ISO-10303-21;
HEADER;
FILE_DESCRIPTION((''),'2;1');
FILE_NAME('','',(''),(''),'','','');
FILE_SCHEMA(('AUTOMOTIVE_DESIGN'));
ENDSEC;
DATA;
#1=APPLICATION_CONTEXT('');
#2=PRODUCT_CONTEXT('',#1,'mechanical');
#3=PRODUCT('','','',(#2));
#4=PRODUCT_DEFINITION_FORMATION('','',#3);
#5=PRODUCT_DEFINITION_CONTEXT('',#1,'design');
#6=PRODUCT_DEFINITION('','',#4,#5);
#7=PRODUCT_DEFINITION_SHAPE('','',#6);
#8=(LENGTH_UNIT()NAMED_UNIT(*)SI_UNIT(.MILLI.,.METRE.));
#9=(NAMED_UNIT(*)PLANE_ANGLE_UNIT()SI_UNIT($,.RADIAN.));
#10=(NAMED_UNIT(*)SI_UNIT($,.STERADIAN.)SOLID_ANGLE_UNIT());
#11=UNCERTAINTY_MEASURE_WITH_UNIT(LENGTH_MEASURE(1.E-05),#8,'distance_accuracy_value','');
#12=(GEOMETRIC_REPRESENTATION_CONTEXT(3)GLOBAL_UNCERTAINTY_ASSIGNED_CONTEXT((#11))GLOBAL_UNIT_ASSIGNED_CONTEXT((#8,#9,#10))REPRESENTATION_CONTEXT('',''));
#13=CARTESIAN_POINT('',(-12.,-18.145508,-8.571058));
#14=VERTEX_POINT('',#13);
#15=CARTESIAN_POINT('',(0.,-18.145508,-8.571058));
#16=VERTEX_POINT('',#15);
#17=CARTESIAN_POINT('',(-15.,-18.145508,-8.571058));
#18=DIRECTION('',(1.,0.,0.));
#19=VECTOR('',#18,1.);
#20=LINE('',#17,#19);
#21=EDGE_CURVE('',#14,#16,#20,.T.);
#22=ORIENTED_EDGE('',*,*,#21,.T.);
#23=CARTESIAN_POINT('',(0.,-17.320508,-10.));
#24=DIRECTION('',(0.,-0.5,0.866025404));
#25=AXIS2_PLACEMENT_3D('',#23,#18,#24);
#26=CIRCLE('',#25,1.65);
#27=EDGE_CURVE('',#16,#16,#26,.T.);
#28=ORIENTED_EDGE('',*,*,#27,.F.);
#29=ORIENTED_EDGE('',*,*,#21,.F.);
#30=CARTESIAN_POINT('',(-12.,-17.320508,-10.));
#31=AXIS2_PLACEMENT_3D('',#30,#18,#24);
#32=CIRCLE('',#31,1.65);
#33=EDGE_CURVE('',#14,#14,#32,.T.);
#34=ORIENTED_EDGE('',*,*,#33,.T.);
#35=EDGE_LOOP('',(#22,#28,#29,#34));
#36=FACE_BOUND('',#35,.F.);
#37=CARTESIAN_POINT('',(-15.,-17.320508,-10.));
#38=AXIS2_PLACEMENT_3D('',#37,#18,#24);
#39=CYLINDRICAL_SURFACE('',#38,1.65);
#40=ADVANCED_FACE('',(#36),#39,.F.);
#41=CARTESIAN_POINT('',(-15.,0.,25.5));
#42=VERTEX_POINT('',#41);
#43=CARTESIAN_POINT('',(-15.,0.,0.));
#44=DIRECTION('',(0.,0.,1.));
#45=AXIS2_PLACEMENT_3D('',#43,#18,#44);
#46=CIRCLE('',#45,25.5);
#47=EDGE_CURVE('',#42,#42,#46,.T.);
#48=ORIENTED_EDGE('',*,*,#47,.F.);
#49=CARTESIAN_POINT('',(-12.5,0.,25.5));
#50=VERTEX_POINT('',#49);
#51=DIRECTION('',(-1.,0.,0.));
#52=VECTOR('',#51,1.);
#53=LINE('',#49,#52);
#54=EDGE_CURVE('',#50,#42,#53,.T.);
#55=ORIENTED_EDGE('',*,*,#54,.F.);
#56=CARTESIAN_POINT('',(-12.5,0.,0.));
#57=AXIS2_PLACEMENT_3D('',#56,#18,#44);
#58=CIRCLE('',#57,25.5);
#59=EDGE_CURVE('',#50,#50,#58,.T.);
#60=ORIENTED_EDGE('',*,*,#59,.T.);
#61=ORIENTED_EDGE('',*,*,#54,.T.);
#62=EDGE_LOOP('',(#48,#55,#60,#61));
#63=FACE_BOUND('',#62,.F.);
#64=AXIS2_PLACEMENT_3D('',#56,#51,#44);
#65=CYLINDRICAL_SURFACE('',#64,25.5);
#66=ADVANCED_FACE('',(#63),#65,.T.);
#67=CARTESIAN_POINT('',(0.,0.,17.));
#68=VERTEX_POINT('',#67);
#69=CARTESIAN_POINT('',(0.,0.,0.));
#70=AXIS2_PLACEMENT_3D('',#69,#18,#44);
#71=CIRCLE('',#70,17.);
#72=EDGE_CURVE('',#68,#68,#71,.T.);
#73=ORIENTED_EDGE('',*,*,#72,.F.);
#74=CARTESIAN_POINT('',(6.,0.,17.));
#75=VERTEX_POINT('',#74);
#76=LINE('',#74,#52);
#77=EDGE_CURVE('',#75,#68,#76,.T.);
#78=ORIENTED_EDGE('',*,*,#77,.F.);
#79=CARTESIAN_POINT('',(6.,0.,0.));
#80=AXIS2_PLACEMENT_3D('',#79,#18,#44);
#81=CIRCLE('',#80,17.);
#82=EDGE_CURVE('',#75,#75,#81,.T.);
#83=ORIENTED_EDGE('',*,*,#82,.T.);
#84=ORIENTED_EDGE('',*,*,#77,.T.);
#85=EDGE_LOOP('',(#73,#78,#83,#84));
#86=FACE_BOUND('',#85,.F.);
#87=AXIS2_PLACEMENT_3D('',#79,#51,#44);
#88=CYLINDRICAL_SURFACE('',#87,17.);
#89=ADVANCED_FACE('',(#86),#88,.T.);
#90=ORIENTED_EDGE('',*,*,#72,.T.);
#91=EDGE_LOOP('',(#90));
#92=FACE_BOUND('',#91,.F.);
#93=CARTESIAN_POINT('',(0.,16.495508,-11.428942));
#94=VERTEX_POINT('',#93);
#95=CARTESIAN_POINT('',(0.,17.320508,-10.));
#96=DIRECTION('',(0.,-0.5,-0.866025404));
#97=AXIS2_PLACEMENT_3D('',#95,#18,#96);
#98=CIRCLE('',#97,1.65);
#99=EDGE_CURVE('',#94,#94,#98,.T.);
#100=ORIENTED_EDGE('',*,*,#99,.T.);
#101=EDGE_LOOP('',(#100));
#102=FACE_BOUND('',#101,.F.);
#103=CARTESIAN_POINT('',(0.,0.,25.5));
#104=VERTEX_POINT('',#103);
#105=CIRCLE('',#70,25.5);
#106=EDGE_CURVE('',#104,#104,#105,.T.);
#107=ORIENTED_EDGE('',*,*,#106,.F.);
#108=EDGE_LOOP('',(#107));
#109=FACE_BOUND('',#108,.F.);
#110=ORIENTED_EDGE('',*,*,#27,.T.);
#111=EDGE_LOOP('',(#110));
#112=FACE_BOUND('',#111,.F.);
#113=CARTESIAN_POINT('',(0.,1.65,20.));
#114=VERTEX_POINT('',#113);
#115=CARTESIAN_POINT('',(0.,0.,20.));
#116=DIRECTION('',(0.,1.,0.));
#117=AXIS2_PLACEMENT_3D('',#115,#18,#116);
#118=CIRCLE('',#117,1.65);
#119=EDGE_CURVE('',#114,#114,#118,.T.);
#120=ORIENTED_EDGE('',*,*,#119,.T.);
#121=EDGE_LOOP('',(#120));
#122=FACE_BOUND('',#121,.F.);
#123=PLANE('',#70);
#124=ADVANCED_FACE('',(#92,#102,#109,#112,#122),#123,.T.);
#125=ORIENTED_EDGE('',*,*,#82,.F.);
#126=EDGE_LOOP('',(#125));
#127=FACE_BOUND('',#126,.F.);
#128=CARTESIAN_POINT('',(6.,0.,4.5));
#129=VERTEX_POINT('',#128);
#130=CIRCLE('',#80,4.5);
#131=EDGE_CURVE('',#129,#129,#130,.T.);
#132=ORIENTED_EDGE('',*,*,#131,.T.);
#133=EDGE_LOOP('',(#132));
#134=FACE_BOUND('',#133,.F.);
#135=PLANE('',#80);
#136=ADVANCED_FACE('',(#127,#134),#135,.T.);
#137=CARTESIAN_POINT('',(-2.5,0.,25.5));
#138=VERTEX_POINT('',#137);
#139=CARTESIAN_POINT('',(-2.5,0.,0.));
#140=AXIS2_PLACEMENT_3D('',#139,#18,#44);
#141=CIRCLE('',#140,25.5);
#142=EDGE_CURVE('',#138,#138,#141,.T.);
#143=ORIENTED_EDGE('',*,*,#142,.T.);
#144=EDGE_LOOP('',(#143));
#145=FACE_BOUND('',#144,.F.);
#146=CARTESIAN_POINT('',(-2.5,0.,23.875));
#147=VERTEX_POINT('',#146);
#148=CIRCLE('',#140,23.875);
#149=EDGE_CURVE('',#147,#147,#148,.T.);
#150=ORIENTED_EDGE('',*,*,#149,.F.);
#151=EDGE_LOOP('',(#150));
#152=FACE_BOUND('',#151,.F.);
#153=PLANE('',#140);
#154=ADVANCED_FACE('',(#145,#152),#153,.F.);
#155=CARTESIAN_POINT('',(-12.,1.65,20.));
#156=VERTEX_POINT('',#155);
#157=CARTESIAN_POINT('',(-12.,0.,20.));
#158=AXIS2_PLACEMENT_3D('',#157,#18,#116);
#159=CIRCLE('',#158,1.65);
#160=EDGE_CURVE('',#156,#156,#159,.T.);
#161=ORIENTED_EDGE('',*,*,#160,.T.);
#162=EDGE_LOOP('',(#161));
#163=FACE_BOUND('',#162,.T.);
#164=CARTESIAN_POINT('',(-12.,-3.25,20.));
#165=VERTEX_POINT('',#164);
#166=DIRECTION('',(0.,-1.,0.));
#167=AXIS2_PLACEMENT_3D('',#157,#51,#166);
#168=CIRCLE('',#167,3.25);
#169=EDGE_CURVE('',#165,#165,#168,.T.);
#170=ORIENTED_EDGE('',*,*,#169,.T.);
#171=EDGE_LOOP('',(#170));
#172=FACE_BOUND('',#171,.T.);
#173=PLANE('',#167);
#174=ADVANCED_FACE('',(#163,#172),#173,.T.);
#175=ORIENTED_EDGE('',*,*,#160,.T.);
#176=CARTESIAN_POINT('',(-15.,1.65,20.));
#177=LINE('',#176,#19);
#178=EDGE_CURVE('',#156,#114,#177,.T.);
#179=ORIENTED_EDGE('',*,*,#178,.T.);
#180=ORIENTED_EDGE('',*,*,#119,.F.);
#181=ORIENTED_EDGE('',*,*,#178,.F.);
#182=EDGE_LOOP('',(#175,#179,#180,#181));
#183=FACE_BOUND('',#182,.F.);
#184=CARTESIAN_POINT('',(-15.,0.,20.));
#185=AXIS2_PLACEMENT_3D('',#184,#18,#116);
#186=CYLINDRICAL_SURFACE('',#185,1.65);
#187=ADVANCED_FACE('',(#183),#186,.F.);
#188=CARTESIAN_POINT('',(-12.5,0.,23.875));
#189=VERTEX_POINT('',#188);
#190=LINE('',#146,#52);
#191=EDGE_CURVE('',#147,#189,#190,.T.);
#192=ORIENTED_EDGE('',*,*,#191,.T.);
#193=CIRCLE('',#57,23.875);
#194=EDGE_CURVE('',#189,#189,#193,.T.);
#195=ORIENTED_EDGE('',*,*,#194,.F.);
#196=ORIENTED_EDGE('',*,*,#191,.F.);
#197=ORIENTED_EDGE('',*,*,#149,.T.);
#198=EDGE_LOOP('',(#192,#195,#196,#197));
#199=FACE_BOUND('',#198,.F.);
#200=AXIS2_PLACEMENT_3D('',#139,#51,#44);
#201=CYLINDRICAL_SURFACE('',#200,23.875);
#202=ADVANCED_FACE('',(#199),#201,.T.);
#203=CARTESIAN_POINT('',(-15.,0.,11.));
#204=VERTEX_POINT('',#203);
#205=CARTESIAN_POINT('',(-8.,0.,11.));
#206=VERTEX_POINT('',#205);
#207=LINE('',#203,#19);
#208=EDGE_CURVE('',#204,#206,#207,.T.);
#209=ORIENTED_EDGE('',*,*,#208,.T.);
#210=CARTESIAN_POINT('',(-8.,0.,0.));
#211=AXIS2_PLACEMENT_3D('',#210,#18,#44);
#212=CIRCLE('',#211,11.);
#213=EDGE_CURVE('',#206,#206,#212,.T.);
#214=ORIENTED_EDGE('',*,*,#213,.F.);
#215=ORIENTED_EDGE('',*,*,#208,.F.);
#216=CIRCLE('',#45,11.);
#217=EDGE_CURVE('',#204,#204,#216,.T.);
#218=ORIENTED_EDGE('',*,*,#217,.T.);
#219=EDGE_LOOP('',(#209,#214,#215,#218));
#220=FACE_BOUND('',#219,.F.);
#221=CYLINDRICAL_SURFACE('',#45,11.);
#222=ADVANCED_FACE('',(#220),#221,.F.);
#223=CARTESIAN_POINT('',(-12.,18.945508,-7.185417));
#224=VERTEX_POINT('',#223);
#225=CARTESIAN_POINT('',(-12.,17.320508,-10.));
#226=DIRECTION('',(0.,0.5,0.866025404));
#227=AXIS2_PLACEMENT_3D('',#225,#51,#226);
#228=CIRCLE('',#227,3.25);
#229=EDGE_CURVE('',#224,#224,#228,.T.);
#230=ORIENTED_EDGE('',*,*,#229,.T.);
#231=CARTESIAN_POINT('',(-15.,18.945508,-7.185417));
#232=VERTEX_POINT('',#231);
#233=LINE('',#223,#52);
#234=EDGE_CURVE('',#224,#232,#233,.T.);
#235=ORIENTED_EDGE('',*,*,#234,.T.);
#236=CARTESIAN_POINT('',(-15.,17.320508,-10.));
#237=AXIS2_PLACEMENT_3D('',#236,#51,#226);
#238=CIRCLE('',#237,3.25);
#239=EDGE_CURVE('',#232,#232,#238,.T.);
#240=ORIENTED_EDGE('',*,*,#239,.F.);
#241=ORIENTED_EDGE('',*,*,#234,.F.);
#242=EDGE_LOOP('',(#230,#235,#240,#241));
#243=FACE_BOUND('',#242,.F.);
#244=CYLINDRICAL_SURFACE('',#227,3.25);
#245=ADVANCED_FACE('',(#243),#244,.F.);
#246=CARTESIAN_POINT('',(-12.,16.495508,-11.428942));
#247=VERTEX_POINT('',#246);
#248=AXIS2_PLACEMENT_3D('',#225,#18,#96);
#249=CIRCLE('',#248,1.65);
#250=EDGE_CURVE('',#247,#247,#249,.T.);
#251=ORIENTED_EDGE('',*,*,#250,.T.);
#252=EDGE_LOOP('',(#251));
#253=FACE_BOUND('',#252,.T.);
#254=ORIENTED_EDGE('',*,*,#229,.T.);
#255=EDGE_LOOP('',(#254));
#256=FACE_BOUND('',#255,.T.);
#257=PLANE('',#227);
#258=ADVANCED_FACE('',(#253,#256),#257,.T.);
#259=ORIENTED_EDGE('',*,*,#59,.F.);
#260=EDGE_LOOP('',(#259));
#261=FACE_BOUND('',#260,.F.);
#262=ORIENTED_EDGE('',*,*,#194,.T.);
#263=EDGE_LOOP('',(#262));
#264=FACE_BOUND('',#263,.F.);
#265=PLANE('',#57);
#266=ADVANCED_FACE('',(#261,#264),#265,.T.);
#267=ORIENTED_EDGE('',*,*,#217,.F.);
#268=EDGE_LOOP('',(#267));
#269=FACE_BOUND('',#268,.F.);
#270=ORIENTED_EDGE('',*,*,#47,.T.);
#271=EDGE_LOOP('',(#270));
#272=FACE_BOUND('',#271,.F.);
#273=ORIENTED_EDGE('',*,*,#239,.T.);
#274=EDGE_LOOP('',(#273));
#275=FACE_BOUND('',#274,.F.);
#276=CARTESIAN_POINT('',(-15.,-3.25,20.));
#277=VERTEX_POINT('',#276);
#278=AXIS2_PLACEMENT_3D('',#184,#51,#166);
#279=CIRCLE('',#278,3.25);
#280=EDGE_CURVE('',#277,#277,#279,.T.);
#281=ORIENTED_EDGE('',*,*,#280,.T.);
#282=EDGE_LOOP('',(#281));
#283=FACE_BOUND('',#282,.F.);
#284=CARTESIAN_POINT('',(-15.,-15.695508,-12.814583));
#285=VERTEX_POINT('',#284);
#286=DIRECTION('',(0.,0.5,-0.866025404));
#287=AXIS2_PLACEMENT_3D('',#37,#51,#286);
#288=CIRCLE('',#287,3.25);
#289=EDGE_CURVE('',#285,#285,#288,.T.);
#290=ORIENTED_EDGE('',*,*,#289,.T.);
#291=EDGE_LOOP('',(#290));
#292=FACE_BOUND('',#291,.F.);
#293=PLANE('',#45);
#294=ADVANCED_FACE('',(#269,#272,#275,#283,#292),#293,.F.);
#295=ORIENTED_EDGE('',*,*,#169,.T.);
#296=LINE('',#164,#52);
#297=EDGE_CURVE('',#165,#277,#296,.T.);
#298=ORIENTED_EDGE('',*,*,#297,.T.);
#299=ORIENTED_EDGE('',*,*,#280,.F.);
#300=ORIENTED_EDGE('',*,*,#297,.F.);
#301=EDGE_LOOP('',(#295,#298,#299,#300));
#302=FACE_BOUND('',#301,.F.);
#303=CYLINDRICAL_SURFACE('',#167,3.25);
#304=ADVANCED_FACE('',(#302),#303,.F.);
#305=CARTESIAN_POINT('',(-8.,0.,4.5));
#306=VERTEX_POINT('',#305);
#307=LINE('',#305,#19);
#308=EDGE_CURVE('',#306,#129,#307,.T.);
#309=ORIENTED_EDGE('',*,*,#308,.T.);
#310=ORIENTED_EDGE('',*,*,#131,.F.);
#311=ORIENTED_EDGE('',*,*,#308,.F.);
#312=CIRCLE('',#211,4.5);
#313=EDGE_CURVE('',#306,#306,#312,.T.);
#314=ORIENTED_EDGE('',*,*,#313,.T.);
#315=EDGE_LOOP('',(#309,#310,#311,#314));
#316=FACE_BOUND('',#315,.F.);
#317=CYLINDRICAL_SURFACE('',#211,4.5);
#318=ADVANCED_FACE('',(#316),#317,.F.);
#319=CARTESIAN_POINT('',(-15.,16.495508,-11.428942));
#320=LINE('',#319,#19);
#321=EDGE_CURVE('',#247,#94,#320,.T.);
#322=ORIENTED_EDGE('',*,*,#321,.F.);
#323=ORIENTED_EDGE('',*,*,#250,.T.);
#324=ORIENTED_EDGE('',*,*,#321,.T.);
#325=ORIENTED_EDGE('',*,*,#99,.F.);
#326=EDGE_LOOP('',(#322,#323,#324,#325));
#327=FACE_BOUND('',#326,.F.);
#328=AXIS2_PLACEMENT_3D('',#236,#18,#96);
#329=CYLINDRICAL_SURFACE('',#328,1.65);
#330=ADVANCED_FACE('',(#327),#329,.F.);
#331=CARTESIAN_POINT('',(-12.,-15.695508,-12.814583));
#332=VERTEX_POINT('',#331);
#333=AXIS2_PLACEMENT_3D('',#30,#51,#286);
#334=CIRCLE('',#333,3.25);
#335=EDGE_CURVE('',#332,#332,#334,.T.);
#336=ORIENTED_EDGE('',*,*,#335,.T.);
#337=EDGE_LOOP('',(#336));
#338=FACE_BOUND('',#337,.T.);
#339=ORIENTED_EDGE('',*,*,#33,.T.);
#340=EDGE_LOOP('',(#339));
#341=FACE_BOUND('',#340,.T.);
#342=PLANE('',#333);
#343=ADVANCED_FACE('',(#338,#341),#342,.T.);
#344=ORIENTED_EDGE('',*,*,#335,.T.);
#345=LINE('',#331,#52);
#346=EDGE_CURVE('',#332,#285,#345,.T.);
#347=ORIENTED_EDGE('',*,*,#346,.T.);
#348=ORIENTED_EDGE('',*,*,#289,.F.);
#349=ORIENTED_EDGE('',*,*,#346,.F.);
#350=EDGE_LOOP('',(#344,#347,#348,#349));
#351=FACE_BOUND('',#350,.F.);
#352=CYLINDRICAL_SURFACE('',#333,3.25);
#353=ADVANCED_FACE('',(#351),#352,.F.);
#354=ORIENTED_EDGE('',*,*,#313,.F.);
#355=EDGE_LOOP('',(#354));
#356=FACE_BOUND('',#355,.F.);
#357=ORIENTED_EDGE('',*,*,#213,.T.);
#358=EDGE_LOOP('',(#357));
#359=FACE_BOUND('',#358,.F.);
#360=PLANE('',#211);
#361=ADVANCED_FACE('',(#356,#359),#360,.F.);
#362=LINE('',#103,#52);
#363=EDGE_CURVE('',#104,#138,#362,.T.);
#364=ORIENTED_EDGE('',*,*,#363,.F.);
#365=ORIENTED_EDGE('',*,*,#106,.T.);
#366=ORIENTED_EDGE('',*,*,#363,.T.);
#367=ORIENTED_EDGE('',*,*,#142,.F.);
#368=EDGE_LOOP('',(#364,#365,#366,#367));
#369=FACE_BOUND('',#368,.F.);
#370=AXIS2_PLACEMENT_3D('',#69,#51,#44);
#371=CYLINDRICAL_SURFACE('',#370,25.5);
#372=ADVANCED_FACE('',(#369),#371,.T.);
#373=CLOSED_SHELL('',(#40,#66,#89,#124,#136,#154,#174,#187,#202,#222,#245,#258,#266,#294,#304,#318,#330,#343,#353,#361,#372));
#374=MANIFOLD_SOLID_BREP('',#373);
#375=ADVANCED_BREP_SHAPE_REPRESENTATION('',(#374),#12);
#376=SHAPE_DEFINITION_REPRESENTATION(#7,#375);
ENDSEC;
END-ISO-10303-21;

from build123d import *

# Parameters (mm, degrees)
F3_D            = 3.3
F3_CBORE_D      = 6.5
F3_CBORE_DEPTH  = 3
F3_COPIES_COUNT = 3


# Not quite as in the source:
# - a pattern or mirror of a feature is missing from the dataset's text; its kind, count and spacing are read off the source's solid


with BuildPart() as f1:
    # F0 (on Front) → F1 (revolve)
    with BuildSketch(Plane.XZ):
        Polygon((-8, 4.5), (6, 4.5), (6, 17), (0, 17), (0, 25.5), (-2.5, 25.5), (-2.5, 23.875), (-12.5, 23.875), (-12.5, 25.5), (-15, 25.5), (-15, 11), (-8, 11), align=None)
    revolve(axis=Axis((0.8759173031, 0, 0), (1, 0, 0)))

    # F3 (through all)
    with Locations(Plane(origin=(-15, 0, 0), x_dir=(0, -1, 0), z_dir=(-1, 0, 0))):
        with Locations((0, 20)):
            f3 = CounterBoreHole(F3_D / 2, F3_CBORE_D / 2, F3_CBORE_DEPTH)

    # F3_copies: F3 ×3 about axis
    f3_copies_axis = Axis((0, 0, 0), (1, 0, 0))
    for i in range(1, F3_COPIES_COUNT):
        add(f3.rotate(f3_copies_axis, i * 360 / F3_COPIES_COUNT), mode=Mode.SUBTRACT)


solid = f1.part
